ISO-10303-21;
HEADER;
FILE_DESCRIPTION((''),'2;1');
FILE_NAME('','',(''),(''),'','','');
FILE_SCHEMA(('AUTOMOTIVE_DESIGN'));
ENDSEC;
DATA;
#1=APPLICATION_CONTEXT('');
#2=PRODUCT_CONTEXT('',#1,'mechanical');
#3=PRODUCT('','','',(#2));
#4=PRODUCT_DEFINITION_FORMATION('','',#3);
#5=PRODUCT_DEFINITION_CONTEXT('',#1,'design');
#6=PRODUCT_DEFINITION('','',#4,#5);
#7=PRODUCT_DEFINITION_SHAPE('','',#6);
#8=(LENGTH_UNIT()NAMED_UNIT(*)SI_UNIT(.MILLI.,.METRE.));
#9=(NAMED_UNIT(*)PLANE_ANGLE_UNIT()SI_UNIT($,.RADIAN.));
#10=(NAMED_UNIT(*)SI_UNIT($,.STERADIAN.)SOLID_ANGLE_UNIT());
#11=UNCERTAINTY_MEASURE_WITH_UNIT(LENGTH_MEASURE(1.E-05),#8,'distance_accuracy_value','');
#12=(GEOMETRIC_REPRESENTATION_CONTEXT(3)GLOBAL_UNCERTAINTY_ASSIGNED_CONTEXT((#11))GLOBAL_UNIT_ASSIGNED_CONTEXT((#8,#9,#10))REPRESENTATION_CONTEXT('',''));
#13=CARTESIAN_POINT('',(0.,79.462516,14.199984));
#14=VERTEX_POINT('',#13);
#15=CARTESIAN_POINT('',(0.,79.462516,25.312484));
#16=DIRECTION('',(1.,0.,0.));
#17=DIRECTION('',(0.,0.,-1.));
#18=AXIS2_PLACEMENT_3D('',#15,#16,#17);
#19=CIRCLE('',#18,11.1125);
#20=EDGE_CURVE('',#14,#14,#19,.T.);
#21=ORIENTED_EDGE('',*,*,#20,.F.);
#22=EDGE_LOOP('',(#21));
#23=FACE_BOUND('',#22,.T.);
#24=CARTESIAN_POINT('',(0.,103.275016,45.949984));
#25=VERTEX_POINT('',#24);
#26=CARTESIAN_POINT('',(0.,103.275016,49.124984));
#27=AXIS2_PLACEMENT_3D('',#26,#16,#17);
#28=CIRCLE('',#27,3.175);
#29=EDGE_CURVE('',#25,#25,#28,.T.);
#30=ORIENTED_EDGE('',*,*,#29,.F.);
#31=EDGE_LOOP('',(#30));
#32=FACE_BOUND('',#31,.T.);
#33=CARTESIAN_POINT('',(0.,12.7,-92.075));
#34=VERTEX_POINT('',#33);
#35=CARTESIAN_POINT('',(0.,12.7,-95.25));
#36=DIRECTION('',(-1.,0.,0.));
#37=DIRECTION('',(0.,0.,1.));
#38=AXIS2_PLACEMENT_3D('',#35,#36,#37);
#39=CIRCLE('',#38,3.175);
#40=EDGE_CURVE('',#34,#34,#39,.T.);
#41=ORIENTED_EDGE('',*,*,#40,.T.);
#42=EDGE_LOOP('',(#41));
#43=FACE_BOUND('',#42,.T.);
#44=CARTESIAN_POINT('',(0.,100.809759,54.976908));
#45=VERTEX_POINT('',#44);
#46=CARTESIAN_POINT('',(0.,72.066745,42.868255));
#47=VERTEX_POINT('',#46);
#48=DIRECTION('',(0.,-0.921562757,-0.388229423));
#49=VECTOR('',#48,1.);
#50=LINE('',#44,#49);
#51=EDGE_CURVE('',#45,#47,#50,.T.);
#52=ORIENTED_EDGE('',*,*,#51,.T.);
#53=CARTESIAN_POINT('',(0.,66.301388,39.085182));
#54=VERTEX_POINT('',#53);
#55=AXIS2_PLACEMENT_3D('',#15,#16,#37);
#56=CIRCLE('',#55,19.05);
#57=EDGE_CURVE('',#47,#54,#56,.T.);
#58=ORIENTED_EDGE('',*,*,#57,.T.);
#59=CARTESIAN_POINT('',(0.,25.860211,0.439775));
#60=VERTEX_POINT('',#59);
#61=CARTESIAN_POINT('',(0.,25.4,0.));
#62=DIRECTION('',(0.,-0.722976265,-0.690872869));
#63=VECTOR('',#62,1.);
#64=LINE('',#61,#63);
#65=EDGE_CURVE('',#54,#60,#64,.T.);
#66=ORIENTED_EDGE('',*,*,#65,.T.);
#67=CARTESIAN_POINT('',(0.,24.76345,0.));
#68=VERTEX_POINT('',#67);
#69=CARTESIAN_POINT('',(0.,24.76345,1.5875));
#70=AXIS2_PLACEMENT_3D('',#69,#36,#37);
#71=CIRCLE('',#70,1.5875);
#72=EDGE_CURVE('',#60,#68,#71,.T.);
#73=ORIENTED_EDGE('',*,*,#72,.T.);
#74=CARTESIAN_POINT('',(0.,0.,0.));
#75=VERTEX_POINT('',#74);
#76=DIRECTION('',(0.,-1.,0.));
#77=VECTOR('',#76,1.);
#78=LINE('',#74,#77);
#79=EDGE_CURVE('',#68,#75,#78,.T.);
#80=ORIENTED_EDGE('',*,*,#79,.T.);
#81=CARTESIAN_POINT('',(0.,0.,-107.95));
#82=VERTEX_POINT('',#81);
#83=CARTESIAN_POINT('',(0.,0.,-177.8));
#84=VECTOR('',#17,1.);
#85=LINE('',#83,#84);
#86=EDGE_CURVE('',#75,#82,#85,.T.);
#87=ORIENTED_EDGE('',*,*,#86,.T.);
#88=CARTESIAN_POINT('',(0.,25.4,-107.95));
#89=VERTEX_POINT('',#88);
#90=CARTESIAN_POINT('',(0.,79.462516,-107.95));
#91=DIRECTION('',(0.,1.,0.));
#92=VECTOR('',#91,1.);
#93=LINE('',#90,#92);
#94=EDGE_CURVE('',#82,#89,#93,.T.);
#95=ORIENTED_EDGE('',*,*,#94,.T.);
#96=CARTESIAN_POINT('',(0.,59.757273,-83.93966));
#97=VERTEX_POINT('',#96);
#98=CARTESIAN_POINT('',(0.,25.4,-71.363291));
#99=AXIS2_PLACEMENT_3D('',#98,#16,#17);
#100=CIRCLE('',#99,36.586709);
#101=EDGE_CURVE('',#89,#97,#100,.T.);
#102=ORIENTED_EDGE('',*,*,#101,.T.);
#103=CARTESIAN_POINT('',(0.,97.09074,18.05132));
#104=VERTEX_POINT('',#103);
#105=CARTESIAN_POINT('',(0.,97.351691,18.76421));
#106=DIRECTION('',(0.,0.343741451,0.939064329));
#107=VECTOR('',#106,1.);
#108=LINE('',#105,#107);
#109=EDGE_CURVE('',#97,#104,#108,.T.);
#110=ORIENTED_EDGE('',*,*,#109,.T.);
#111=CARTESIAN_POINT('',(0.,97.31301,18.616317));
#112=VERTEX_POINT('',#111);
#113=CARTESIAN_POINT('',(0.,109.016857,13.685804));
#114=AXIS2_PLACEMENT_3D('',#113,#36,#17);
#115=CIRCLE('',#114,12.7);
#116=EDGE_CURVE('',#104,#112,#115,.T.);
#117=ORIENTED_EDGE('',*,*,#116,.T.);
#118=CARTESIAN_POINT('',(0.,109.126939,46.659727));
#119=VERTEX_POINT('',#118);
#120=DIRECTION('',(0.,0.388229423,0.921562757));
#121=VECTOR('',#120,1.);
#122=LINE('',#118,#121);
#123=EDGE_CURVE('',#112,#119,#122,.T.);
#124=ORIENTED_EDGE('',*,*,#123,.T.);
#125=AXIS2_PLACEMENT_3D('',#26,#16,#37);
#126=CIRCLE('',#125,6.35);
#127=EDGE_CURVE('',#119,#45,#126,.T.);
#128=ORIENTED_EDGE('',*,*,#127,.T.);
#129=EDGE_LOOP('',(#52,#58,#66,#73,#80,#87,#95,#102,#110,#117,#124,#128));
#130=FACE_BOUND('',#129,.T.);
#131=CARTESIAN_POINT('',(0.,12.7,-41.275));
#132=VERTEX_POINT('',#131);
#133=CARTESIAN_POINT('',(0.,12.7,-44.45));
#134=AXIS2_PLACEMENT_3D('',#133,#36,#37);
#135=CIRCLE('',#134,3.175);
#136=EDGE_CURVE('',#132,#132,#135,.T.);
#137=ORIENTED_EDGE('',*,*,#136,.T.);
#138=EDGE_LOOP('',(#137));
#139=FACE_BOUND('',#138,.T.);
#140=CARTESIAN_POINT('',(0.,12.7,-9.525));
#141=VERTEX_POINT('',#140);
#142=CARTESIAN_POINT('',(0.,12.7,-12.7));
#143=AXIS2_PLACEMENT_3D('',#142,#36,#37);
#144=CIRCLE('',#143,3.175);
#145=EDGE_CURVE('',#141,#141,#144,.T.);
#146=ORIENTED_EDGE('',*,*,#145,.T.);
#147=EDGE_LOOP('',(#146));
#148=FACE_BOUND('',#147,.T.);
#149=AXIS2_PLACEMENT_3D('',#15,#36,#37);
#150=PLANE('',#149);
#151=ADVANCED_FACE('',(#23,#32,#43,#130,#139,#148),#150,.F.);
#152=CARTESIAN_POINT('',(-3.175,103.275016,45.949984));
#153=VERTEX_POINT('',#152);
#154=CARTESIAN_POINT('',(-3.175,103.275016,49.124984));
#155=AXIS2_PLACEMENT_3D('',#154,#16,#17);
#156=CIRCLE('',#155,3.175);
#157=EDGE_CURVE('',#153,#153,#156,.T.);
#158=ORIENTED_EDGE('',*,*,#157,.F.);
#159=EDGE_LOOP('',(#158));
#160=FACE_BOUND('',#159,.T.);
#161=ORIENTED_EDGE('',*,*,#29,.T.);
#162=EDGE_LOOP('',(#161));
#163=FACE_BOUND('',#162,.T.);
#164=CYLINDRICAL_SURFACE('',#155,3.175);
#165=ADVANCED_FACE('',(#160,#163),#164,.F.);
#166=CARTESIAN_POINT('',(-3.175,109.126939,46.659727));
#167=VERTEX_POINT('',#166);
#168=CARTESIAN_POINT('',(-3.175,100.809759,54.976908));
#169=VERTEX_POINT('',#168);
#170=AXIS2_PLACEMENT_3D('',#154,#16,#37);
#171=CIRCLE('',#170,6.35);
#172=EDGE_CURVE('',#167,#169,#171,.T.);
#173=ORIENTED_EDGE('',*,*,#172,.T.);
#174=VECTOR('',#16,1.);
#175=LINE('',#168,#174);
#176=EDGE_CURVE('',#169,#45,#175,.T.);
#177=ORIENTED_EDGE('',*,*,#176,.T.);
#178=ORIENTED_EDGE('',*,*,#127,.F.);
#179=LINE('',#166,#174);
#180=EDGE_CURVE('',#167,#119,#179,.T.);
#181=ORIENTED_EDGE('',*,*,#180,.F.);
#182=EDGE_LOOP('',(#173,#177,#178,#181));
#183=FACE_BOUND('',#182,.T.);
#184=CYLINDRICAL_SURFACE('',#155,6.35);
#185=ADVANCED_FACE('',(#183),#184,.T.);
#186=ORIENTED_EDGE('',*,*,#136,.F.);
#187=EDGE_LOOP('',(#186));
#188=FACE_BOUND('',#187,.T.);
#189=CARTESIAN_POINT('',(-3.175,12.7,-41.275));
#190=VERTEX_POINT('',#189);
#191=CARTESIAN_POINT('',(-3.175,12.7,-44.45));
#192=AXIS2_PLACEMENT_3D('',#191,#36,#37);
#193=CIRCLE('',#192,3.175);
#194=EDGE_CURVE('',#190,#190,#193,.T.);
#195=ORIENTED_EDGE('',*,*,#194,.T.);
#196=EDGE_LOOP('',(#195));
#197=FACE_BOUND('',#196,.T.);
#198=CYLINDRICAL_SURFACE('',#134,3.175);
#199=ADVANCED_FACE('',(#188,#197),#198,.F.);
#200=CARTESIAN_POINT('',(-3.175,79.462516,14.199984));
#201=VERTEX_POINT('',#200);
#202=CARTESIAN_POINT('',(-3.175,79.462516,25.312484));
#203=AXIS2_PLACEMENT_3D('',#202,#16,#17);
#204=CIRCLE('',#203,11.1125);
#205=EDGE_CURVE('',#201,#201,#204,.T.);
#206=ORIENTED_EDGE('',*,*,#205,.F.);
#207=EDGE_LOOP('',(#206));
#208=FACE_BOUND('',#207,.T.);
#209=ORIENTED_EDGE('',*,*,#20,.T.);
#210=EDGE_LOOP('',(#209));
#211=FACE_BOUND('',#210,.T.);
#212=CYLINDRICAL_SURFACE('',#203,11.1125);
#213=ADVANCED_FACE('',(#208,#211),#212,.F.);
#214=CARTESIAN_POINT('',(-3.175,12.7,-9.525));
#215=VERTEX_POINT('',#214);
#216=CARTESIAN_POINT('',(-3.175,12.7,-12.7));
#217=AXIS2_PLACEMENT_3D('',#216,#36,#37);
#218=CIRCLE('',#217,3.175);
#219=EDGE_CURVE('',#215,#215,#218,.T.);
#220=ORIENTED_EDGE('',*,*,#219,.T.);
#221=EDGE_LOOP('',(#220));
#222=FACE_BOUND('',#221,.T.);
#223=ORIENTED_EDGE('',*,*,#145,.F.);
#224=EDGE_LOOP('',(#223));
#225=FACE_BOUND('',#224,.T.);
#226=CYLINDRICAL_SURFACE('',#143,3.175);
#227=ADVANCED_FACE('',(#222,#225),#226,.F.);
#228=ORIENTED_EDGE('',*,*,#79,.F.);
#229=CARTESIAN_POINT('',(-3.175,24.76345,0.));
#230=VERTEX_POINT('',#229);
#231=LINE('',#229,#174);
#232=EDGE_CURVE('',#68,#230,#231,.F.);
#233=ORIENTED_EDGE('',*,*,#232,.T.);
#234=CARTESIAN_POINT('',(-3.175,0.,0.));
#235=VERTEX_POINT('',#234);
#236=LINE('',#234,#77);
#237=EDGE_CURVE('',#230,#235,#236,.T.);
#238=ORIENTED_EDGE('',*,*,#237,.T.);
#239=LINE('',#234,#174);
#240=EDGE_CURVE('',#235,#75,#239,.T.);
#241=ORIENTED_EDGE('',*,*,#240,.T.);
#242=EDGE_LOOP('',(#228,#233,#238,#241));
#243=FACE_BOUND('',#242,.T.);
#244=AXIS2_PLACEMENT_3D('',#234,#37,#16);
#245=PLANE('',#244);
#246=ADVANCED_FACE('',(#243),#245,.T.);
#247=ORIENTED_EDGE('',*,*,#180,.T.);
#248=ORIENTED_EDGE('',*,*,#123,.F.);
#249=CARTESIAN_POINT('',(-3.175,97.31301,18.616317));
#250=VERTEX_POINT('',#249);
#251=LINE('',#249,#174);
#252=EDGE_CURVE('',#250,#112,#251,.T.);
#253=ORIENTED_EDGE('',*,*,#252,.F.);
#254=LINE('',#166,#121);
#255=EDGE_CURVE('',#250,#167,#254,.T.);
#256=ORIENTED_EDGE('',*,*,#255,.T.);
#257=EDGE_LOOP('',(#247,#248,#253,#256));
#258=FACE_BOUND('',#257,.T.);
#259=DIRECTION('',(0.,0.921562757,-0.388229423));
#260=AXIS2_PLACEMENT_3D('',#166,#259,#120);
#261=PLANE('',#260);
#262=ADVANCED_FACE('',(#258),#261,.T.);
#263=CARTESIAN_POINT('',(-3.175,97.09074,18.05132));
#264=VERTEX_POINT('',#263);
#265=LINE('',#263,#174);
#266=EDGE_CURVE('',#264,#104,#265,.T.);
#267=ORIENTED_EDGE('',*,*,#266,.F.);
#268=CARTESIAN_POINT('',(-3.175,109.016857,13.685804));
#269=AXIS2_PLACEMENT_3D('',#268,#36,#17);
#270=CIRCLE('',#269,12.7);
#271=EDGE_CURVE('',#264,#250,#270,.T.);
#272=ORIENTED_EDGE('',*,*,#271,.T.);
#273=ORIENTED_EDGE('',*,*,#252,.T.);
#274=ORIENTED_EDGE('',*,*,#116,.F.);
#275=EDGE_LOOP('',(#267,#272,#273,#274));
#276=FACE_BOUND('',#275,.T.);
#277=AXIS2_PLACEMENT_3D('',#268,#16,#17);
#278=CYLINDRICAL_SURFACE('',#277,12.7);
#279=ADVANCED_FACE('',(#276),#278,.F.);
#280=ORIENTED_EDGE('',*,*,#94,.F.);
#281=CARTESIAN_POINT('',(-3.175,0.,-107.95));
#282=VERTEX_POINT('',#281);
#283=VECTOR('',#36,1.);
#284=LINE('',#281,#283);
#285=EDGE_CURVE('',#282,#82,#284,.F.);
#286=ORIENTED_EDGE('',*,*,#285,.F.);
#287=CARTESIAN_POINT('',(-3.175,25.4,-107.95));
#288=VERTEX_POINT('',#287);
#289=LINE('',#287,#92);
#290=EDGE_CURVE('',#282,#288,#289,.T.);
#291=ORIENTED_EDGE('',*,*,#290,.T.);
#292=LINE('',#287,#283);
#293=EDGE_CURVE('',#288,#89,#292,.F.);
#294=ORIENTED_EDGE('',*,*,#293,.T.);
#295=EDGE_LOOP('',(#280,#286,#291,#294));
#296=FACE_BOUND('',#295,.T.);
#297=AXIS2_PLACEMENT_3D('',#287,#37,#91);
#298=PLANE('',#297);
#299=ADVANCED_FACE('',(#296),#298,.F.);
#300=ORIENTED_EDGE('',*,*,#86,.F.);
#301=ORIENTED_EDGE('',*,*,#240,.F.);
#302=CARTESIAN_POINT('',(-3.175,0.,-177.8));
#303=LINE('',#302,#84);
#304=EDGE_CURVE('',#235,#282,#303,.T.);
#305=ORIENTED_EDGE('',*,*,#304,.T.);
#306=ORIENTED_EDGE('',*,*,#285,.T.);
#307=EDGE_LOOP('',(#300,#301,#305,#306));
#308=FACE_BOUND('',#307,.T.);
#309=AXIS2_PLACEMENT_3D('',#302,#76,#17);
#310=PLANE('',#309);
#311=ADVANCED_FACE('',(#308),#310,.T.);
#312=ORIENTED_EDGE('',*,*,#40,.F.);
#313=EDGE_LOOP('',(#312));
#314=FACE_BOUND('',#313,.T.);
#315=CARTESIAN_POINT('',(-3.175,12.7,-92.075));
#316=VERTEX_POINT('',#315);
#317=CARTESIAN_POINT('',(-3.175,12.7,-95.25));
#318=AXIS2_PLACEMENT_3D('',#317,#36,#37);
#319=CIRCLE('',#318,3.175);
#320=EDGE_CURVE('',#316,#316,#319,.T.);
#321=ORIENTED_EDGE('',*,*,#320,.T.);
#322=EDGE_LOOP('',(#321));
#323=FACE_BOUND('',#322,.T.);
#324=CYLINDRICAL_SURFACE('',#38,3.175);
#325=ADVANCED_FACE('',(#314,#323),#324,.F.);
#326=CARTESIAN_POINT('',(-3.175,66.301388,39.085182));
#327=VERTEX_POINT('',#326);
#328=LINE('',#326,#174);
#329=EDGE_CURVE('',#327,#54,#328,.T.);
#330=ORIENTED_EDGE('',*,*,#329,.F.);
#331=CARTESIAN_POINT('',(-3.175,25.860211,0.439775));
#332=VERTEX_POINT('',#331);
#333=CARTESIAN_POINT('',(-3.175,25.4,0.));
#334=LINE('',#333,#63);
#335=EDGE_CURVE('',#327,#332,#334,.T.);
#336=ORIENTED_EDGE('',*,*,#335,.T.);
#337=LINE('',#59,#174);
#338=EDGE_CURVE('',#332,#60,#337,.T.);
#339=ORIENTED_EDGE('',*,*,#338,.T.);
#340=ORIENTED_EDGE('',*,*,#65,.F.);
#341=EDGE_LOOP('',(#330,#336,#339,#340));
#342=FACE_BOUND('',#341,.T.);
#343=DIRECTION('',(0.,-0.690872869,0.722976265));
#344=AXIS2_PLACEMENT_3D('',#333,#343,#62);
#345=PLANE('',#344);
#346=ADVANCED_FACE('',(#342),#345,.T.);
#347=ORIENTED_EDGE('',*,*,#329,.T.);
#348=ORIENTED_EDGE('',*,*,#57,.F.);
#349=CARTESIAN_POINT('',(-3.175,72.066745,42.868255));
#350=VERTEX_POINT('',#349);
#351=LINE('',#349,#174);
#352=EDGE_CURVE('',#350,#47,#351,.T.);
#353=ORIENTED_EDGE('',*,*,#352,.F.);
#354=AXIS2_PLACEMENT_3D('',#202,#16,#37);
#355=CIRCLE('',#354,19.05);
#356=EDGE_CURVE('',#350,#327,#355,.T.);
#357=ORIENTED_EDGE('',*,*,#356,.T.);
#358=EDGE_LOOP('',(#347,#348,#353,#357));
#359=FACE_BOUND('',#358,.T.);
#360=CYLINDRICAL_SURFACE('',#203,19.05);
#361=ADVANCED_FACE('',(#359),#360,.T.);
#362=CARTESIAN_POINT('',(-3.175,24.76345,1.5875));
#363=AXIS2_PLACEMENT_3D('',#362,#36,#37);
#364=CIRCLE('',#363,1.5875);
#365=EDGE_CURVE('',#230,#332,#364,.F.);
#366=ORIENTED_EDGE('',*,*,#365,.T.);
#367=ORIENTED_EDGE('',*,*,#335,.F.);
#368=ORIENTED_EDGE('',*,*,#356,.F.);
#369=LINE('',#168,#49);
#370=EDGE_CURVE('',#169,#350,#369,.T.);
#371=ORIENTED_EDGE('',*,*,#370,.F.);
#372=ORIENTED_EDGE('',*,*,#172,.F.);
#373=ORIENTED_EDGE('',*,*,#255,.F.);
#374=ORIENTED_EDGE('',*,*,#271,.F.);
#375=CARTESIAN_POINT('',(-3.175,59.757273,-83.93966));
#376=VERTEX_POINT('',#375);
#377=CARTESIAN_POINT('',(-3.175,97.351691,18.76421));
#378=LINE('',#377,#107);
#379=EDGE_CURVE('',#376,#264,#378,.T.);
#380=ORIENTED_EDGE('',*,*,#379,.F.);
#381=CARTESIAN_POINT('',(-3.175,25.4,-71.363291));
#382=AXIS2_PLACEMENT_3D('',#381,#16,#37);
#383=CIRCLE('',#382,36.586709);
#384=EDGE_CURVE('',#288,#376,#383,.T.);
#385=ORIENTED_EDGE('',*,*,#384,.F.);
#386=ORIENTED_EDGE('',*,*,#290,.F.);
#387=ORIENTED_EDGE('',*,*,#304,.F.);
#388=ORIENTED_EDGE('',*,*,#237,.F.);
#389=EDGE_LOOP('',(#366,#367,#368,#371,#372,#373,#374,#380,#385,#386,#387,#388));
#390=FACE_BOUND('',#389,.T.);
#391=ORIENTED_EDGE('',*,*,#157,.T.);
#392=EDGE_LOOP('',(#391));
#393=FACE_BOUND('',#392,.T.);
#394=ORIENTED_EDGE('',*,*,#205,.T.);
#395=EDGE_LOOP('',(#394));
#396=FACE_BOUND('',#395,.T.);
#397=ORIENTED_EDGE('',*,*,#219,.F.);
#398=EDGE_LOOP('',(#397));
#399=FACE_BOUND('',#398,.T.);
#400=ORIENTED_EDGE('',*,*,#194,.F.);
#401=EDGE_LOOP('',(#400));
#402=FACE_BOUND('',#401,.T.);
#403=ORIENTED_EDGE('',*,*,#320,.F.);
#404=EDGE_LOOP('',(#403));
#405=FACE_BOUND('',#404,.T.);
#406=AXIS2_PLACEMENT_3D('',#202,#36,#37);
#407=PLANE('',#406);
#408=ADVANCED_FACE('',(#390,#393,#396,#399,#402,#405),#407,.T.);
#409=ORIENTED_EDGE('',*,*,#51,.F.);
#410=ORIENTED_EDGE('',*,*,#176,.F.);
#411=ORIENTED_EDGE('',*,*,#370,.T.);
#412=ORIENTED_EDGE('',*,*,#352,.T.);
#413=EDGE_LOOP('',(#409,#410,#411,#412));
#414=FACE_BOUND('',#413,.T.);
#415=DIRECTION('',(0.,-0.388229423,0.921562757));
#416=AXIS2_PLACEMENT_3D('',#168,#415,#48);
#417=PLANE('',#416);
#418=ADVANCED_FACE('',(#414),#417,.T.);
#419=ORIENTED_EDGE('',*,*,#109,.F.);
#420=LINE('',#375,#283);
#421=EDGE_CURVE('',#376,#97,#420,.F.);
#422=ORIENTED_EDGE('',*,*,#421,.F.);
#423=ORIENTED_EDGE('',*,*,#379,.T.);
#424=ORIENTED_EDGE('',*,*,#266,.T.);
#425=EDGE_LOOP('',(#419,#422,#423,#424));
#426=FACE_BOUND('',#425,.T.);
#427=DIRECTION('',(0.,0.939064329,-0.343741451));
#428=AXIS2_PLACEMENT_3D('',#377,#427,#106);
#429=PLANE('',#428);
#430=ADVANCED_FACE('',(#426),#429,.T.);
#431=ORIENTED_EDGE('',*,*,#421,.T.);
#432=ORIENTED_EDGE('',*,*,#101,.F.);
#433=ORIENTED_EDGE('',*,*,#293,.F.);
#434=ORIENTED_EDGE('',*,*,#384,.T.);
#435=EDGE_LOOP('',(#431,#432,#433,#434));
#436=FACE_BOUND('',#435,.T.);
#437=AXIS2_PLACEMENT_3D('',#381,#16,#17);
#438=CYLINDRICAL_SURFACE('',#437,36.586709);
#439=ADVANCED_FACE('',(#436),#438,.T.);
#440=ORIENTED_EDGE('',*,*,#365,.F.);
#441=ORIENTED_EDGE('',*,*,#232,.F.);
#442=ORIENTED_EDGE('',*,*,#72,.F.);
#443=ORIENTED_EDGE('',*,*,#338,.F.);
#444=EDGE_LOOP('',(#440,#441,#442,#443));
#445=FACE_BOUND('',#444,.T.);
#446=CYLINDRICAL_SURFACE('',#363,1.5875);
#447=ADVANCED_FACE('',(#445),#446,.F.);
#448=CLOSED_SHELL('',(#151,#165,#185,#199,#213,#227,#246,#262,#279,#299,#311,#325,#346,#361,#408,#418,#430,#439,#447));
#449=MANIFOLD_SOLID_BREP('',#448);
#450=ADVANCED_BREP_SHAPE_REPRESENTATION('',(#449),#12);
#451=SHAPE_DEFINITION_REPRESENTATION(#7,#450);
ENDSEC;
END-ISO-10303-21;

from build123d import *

# Parameters (mm, degrees)
SKETCH1_R          = 11.1125
BASE_FLANGE1_DEPTH = 3.175
SKETCH2_R          = 3.175
TAB1_DEPTH         = 3.175
SKETCH3_R          = 3.175
CUT_EXTRUDE1_DEPTH = 209.903242457
FILLET1_R          = 1.5875


# Sheet-metal steps are written as plain solids
with BuildPart() as part:
    # Sketch1 → Base-Flange1 (new body)
    with BuildSketch(Plane(origin=(0, 0, 0), x_dir=(0, 0, -1), z_dir=(1, 0, 0))):
        with BuildLine():
            Line((0, 0), (0, 25.4))
            Line((0, 25.4), (-39.085182146, 66.301387632))
            ThreePointArc((-39.085182146, 66.301387632), (-41.252321544, 89.894394258), (-18.764209654, 97.351691251))
            Line((-18.764209654, 97.351691251), (177.8, 25.4))
            Line((177.8, 25.4), (177.8, 0))
            Line((177.8, 0), (0, 0))
        make_face()
        with Locations((-25.3124843, 79.462515777)):
            Circle(SKETCH1_R, mode=Mode.SUBTRACT)
    extrude(amount=-BASE_FLANGE1_DEPTH)

    # Sketch2 → Tab1 (add)
    with BuildSketch(Plane(origin=(0, 0, 0), x_dir=(0, 0, -1), z_dir=(1, 0, 0))):
        with BuildLine():
            Line((-46.659727461, 109.126939283), (-18.616317191, 97.313010257))
            ThreePointArc((-18.616317191, 97.313010257), (-18.335147008, 97.198498454), (-18.051319944, 97.090740286))
            Line((-18.051319944, 97.090740286), (-18.764209654, 97.351691251))
            ThreePointArc((-18.764209654, 97.351691251), (-39.101007237, 92.607063514), (-42.868254817, 72.06674526))
            Line((-42.868254817, 72.06674526), (-54.976907806, 100.809758938))
            ThreePointArc((-54.976907806, 100.809758938), (-53.615112361, 107.765143837), (-46.659727461, 109.126939283))
        make_face()
        with Locations((-49.1249843, 103.275015777)):
            Circle(SKETCH2_R, mode=Mode.SUBTRACT)
    extrude(amount=-TAB1_DEPTH)

    # Sketch3 → Cut-Extrude1 (cut, through all)
    with BuildSketch(Plane.ZY.offset(3.175)):
        with Locations((-95.25, 12.7)):
            Circle(SKETCH3_R)
        with Locations((-12.7, 12.7)):
            Circle(SKETCH3_R)
        with Locations((-44.45, 12.7)):
            Circle(SKETCH3_R)
        with BuildLine():
            Line((-107.95, 25.4), (-107.95, 0))
            Line((-107.95, 0), (-177.8, 0))
            Line((-177.8, 0), (-177.8, 25.4))
            Line((-177.8, 25.4), (-83.93965963, 59.757273091))
            ThreePointArc((-83.93965963, 59.757273091), (-101.35258254, 46.357806773), (-107.95, 25.4))
        make_face()
    extrude(amount=-CUT_EXTRUDE1_DEPTH, mode=Mode.SUBTRACT)

    # Fillet1
    fillet1_edges = [part.edges().sort_by_distance(p)[0] for p in [
        (-1.5875, 25.4, 0),
    ]]
    fillet(fillet1_edges, radius=FILLET1_R)


solid = part.part
